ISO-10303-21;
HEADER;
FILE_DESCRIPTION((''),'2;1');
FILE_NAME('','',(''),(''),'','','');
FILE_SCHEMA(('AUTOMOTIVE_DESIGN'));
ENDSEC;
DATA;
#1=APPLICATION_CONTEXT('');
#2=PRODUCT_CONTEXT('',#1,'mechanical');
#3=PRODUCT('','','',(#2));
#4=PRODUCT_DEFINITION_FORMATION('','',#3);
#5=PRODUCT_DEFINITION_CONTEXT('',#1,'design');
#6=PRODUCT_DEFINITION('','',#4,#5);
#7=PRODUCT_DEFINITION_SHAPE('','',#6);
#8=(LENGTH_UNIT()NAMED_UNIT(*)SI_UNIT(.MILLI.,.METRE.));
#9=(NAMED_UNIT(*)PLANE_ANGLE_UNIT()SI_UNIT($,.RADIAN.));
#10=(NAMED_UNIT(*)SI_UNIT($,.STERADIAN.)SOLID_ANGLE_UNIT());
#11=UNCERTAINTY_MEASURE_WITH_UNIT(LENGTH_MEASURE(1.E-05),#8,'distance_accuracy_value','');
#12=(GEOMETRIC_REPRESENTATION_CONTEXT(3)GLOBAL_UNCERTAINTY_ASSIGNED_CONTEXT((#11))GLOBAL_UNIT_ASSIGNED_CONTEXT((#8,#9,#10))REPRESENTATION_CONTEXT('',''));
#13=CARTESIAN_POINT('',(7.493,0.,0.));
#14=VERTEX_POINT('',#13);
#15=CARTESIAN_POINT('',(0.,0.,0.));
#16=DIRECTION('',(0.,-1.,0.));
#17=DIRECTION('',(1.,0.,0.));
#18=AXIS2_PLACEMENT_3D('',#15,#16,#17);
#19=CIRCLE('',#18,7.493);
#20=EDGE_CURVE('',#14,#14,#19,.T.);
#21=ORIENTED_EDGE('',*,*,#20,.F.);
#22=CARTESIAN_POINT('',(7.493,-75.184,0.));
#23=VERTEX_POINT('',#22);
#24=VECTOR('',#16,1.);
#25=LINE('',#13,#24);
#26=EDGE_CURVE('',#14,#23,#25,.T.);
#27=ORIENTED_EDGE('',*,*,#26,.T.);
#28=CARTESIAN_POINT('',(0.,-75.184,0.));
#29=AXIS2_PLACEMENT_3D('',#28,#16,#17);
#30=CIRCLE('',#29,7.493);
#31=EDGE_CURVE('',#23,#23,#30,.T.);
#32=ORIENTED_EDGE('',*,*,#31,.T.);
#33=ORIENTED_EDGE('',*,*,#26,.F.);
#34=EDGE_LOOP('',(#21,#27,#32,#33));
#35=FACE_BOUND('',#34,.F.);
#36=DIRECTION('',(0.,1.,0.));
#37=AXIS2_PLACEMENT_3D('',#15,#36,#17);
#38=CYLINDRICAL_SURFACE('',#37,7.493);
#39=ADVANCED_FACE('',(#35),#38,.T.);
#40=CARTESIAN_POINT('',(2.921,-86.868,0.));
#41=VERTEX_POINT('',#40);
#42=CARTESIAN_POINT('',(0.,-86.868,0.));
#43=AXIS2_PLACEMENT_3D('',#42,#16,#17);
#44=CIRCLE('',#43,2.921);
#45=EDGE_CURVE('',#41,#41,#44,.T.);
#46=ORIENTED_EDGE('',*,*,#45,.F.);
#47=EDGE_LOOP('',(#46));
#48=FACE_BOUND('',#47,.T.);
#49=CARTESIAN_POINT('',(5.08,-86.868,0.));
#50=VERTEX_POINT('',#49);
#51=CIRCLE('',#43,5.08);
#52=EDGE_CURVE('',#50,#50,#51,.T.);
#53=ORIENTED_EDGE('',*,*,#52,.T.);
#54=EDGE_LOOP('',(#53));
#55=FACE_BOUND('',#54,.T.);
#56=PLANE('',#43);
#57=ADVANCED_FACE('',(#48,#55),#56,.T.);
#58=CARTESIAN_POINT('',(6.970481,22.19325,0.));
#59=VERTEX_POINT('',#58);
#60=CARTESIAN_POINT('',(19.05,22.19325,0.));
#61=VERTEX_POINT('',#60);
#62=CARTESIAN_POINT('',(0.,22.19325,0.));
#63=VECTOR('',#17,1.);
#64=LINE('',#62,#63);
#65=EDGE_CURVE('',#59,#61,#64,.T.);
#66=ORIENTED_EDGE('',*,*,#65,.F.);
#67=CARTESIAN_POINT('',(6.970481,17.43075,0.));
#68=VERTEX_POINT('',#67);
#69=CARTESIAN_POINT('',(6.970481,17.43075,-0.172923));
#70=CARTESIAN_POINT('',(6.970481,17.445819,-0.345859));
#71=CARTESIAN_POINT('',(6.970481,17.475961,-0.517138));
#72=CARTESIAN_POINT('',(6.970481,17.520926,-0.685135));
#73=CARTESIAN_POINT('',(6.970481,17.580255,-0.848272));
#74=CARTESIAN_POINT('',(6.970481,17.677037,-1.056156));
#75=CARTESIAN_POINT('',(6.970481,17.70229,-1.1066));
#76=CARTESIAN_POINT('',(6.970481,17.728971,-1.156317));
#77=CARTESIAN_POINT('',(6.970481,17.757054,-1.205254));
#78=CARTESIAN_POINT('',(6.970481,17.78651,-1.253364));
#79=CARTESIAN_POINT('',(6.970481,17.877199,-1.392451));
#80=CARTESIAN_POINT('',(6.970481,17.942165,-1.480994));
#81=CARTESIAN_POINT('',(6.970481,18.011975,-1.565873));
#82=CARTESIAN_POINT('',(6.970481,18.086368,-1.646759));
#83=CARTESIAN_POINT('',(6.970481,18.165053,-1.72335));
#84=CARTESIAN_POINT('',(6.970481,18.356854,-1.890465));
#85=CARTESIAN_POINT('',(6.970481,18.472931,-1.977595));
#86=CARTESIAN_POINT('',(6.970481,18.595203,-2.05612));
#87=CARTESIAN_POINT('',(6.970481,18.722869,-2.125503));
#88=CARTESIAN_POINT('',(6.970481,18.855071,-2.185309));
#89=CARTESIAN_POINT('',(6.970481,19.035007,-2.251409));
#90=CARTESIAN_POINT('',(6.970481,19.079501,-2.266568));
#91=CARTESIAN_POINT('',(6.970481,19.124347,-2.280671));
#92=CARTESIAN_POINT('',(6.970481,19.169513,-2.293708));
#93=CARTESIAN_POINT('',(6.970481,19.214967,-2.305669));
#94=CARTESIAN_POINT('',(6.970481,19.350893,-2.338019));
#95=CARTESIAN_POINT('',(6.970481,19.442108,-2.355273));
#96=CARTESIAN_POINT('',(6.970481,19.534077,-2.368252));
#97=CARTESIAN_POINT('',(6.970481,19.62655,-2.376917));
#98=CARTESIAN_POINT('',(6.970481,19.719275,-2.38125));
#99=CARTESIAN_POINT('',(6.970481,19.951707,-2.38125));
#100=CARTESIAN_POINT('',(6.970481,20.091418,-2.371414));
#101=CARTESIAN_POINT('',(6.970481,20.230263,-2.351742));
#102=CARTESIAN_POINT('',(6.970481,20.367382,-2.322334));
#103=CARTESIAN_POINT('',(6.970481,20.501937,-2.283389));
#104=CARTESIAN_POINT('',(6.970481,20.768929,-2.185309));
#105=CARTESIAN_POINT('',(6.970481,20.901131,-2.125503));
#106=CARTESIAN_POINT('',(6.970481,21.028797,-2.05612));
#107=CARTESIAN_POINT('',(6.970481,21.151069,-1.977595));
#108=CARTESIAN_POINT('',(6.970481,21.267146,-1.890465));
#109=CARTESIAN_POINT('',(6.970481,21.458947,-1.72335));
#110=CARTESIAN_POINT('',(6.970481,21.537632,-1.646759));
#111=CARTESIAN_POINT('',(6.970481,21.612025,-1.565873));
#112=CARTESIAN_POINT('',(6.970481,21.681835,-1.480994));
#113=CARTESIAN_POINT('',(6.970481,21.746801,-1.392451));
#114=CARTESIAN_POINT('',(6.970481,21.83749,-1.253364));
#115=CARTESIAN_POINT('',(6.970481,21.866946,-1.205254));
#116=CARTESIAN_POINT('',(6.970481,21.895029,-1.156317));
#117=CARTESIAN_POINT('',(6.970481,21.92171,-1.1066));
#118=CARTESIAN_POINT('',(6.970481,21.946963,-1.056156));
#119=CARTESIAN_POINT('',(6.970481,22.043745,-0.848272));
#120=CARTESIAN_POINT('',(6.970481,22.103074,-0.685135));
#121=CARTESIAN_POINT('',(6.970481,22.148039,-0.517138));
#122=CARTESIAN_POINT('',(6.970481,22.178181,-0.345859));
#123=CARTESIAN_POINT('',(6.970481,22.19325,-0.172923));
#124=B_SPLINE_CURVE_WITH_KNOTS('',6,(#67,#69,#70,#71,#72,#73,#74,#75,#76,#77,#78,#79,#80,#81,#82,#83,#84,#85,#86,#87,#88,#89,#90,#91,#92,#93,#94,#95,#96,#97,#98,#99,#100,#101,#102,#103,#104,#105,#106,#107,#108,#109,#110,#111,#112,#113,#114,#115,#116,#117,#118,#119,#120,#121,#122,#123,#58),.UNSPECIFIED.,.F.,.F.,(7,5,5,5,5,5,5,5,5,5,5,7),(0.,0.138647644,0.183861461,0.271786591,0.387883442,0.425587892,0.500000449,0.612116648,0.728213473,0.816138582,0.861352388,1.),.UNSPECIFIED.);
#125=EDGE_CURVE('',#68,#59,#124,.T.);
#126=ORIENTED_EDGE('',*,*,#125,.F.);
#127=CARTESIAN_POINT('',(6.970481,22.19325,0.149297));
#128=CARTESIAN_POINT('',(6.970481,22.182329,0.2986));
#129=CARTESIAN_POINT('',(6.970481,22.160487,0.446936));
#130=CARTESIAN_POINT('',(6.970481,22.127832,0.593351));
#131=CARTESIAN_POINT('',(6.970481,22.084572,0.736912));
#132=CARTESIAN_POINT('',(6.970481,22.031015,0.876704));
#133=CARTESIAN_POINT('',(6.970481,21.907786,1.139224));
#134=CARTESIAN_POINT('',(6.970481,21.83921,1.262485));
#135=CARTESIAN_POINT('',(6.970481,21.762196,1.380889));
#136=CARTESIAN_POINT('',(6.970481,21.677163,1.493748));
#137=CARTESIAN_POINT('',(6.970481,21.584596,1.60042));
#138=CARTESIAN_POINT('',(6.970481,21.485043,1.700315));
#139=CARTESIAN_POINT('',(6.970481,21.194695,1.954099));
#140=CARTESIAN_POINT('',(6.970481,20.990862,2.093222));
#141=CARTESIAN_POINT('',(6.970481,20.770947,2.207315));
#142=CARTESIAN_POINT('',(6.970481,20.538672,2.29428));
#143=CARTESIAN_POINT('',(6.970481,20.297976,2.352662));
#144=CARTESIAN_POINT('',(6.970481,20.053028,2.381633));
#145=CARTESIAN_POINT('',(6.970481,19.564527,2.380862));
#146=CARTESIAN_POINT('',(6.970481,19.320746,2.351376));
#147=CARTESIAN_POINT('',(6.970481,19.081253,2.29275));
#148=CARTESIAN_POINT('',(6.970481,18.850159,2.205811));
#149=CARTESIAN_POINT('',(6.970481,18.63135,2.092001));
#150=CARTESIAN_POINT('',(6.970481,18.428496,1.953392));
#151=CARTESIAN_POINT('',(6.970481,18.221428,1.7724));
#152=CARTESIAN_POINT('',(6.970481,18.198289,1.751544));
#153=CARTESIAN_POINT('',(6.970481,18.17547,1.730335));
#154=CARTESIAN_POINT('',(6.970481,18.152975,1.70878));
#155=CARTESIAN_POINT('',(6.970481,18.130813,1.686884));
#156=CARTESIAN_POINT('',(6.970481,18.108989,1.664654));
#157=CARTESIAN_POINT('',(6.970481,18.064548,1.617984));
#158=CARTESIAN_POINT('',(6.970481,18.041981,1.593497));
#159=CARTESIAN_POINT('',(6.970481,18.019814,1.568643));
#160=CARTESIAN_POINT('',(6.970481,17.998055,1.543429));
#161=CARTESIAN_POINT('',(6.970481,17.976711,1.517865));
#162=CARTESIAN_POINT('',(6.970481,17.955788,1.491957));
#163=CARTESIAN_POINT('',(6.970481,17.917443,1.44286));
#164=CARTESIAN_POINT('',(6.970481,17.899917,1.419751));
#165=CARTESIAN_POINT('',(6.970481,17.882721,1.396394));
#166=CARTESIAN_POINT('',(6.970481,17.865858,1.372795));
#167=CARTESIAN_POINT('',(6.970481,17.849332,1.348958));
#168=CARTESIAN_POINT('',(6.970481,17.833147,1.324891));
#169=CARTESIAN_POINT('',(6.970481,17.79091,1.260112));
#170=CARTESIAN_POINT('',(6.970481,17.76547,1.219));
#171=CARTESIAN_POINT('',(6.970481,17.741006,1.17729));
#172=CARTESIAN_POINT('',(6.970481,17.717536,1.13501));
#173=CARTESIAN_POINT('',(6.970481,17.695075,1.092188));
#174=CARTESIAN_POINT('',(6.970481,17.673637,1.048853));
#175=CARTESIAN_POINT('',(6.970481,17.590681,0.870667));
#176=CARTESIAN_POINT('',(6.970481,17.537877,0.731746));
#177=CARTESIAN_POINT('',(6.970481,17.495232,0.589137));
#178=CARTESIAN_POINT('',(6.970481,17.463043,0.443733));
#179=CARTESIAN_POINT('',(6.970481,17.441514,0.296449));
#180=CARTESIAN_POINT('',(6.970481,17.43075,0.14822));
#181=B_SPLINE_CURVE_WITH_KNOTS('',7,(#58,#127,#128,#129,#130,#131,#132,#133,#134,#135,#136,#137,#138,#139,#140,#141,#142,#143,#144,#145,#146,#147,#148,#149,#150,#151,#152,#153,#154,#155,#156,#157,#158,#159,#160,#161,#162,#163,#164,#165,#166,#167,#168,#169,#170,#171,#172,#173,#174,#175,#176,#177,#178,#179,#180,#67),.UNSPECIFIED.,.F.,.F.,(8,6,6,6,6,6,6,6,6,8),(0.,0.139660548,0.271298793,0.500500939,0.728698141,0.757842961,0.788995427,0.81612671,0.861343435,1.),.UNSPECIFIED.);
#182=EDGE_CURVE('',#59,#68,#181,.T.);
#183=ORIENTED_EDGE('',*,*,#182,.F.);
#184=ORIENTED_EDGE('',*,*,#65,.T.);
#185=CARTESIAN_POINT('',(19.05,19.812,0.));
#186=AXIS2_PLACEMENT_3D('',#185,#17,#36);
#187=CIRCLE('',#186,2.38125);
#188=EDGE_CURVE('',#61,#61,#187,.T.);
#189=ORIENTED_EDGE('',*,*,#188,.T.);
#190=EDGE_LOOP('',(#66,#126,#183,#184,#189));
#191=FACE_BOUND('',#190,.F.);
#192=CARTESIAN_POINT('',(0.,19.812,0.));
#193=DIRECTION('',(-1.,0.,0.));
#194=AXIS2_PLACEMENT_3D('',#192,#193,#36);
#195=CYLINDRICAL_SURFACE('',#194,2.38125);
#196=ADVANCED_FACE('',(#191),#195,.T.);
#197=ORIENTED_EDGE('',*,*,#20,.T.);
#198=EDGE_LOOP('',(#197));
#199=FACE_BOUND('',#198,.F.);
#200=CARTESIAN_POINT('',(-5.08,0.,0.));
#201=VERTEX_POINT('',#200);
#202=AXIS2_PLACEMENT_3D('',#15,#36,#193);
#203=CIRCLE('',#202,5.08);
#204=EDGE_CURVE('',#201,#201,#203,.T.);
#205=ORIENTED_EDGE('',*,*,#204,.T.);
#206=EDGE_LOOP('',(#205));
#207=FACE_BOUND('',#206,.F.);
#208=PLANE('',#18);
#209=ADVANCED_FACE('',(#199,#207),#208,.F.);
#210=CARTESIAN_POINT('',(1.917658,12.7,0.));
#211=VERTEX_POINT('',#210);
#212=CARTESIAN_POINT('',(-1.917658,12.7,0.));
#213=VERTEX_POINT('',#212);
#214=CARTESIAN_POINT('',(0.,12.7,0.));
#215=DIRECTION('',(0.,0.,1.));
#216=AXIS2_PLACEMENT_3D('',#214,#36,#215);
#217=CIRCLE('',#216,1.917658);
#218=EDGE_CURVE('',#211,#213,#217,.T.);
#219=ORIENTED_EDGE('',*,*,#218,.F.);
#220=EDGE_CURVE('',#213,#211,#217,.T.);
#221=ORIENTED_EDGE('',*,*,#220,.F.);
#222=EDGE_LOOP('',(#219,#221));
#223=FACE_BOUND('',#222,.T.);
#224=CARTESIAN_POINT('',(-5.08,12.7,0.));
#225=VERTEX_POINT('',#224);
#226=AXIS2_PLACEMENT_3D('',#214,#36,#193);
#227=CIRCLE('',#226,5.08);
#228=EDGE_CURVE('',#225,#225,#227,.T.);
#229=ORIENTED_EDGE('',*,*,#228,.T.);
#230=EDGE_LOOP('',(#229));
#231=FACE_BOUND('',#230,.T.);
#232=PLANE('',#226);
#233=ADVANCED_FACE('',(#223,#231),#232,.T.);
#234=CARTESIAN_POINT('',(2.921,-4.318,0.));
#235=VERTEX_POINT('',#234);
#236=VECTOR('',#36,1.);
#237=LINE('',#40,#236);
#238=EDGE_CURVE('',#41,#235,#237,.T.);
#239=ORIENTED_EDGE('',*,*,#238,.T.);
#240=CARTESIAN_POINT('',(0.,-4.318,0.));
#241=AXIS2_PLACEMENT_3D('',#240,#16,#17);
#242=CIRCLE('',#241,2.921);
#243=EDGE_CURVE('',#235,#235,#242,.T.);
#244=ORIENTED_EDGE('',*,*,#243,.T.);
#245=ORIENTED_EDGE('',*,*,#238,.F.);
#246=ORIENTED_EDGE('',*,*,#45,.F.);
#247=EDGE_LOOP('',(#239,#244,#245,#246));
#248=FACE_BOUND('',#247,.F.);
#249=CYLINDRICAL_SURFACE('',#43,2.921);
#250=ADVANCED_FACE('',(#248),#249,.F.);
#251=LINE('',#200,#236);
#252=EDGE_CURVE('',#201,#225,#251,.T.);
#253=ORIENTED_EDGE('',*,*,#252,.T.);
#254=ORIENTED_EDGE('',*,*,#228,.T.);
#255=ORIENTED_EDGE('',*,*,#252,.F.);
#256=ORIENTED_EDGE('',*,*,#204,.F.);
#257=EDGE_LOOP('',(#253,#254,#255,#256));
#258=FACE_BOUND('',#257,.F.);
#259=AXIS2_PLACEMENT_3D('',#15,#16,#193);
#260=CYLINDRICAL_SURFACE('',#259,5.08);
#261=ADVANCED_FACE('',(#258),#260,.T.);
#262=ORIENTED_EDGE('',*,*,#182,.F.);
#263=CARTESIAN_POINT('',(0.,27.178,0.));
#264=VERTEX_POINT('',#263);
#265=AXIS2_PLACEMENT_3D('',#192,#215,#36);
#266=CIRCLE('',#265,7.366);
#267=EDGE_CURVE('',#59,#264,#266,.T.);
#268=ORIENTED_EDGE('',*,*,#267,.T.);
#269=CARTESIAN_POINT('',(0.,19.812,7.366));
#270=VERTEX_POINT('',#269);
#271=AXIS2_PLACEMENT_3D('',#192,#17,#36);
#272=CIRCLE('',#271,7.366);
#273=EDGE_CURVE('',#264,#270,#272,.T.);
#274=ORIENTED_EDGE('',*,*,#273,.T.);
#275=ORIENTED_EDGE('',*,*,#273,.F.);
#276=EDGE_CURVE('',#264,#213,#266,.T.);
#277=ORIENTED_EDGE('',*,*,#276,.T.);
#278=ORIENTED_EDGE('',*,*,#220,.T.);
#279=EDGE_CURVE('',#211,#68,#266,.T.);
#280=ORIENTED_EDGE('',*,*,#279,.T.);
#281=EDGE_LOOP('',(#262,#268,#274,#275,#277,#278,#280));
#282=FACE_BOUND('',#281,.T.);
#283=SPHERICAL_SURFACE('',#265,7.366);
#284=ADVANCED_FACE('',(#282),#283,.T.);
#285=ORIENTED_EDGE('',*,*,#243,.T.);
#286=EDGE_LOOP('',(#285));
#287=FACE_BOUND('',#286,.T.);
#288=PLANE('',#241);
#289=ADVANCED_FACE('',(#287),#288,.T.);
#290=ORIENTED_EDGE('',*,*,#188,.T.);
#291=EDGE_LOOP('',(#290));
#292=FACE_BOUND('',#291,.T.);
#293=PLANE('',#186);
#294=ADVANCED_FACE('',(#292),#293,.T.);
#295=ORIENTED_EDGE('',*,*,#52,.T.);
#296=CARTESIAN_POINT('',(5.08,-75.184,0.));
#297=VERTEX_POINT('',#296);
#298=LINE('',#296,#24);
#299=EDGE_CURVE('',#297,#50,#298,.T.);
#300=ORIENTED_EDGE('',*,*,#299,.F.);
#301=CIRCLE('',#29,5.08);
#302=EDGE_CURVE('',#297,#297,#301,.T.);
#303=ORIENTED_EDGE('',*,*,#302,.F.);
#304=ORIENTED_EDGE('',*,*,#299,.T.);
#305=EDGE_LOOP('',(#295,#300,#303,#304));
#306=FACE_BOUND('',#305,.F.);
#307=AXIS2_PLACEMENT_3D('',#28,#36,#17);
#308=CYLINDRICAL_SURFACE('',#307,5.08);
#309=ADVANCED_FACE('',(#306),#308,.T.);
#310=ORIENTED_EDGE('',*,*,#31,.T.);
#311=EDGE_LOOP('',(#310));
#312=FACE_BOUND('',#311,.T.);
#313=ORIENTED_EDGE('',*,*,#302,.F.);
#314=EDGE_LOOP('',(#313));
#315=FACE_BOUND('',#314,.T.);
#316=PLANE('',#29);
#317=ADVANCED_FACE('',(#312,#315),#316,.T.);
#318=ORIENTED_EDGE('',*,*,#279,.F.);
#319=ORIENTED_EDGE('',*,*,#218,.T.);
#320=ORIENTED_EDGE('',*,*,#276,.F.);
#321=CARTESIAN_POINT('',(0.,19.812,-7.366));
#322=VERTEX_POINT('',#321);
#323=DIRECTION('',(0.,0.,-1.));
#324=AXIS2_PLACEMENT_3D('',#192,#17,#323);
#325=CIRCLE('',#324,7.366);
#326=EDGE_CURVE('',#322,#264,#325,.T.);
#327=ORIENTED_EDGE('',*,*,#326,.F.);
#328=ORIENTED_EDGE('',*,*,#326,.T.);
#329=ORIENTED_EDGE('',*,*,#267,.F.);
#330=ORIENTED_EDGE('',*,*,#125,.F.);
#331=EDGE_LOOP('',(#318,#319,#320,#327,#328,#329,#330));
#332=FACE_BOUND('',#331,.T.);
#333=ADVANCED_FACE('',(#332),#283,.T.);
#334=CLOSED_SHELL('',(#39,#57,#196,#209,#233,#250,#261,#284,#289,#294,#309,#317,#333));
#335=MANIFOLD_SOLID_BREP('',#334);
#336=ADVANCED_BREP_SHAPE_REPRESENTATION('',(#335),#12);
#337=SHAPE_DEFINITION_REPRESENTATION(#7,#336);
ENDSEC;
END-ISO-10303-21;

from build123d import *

# Parameters (mm, degrees)
F0_R      = 7.493
F1_DEPTH  = 75.184
F2_R      = 5.08
F3_DEPTH  = 12.7
F4_R      = 5.08
F5_DEPTH  = 11.684
F8_R      = 2.921
F9_DEPTH  = 82.55
F10_R     = 2.38125
F11_DEPTH = 19.05


with BuildPart() as f1:
    # F0 (on Front) → F1 (new body)
    with BuildSketch(Plane.XZ):
        Circle(F0_R)
    extrude(amount=F1_DEPTH)

    # F2 (on face) → F3 (join)
    with BuildSketch(Plane(origin=(0, 0, 0), x_dir=(-1, 0, 0), z_dir=(0, 1, 0))):
        Circle(F2_R)
    extrude(amount=F3_DEPTH)

    # F4 (on face) → F5 (join)
    with BuildSketch(Plane.XZ.offset(75.184)):
        Circle(F4_R)
    extrude(amount=F5_DEPTH)

    # F6 (on Right) → F7 (revolve)
    with BuildSketch(Plane.YZ):
        with BuildLine():
            ThreePointArc((19.812, -7.366), (25.0205485502, -5.2085485502), (27.178, 0))
            ThreePointArc((27.178, 0), (25.0205485502, 5.2085485502), (19.812, 7.366))
            Line((19.812, 7.366), (19.812, 0))
            Line((19.812, 0), (19.812, -7.366))
        make_face()
    revolve(axis=Axis((0, 19.812, 3.683), (0, 0, 1)))

    # F8 (on face) → F9 (cut)
    with BuildSketch(Plane.XZ.offset(86.868)):
        Circle(F8_R)
    extrude(amount=-F9_DEPTH, mode=Mode.SUBTRACT)

    # F10 (on Right) → F11 (join)
    with BuildSketch(Plane.YZ):
        with Locations((19.812, 0)):
            Circle(F10_R)
    extrude(amount=F11_DEPTH)


solid = f1.part
